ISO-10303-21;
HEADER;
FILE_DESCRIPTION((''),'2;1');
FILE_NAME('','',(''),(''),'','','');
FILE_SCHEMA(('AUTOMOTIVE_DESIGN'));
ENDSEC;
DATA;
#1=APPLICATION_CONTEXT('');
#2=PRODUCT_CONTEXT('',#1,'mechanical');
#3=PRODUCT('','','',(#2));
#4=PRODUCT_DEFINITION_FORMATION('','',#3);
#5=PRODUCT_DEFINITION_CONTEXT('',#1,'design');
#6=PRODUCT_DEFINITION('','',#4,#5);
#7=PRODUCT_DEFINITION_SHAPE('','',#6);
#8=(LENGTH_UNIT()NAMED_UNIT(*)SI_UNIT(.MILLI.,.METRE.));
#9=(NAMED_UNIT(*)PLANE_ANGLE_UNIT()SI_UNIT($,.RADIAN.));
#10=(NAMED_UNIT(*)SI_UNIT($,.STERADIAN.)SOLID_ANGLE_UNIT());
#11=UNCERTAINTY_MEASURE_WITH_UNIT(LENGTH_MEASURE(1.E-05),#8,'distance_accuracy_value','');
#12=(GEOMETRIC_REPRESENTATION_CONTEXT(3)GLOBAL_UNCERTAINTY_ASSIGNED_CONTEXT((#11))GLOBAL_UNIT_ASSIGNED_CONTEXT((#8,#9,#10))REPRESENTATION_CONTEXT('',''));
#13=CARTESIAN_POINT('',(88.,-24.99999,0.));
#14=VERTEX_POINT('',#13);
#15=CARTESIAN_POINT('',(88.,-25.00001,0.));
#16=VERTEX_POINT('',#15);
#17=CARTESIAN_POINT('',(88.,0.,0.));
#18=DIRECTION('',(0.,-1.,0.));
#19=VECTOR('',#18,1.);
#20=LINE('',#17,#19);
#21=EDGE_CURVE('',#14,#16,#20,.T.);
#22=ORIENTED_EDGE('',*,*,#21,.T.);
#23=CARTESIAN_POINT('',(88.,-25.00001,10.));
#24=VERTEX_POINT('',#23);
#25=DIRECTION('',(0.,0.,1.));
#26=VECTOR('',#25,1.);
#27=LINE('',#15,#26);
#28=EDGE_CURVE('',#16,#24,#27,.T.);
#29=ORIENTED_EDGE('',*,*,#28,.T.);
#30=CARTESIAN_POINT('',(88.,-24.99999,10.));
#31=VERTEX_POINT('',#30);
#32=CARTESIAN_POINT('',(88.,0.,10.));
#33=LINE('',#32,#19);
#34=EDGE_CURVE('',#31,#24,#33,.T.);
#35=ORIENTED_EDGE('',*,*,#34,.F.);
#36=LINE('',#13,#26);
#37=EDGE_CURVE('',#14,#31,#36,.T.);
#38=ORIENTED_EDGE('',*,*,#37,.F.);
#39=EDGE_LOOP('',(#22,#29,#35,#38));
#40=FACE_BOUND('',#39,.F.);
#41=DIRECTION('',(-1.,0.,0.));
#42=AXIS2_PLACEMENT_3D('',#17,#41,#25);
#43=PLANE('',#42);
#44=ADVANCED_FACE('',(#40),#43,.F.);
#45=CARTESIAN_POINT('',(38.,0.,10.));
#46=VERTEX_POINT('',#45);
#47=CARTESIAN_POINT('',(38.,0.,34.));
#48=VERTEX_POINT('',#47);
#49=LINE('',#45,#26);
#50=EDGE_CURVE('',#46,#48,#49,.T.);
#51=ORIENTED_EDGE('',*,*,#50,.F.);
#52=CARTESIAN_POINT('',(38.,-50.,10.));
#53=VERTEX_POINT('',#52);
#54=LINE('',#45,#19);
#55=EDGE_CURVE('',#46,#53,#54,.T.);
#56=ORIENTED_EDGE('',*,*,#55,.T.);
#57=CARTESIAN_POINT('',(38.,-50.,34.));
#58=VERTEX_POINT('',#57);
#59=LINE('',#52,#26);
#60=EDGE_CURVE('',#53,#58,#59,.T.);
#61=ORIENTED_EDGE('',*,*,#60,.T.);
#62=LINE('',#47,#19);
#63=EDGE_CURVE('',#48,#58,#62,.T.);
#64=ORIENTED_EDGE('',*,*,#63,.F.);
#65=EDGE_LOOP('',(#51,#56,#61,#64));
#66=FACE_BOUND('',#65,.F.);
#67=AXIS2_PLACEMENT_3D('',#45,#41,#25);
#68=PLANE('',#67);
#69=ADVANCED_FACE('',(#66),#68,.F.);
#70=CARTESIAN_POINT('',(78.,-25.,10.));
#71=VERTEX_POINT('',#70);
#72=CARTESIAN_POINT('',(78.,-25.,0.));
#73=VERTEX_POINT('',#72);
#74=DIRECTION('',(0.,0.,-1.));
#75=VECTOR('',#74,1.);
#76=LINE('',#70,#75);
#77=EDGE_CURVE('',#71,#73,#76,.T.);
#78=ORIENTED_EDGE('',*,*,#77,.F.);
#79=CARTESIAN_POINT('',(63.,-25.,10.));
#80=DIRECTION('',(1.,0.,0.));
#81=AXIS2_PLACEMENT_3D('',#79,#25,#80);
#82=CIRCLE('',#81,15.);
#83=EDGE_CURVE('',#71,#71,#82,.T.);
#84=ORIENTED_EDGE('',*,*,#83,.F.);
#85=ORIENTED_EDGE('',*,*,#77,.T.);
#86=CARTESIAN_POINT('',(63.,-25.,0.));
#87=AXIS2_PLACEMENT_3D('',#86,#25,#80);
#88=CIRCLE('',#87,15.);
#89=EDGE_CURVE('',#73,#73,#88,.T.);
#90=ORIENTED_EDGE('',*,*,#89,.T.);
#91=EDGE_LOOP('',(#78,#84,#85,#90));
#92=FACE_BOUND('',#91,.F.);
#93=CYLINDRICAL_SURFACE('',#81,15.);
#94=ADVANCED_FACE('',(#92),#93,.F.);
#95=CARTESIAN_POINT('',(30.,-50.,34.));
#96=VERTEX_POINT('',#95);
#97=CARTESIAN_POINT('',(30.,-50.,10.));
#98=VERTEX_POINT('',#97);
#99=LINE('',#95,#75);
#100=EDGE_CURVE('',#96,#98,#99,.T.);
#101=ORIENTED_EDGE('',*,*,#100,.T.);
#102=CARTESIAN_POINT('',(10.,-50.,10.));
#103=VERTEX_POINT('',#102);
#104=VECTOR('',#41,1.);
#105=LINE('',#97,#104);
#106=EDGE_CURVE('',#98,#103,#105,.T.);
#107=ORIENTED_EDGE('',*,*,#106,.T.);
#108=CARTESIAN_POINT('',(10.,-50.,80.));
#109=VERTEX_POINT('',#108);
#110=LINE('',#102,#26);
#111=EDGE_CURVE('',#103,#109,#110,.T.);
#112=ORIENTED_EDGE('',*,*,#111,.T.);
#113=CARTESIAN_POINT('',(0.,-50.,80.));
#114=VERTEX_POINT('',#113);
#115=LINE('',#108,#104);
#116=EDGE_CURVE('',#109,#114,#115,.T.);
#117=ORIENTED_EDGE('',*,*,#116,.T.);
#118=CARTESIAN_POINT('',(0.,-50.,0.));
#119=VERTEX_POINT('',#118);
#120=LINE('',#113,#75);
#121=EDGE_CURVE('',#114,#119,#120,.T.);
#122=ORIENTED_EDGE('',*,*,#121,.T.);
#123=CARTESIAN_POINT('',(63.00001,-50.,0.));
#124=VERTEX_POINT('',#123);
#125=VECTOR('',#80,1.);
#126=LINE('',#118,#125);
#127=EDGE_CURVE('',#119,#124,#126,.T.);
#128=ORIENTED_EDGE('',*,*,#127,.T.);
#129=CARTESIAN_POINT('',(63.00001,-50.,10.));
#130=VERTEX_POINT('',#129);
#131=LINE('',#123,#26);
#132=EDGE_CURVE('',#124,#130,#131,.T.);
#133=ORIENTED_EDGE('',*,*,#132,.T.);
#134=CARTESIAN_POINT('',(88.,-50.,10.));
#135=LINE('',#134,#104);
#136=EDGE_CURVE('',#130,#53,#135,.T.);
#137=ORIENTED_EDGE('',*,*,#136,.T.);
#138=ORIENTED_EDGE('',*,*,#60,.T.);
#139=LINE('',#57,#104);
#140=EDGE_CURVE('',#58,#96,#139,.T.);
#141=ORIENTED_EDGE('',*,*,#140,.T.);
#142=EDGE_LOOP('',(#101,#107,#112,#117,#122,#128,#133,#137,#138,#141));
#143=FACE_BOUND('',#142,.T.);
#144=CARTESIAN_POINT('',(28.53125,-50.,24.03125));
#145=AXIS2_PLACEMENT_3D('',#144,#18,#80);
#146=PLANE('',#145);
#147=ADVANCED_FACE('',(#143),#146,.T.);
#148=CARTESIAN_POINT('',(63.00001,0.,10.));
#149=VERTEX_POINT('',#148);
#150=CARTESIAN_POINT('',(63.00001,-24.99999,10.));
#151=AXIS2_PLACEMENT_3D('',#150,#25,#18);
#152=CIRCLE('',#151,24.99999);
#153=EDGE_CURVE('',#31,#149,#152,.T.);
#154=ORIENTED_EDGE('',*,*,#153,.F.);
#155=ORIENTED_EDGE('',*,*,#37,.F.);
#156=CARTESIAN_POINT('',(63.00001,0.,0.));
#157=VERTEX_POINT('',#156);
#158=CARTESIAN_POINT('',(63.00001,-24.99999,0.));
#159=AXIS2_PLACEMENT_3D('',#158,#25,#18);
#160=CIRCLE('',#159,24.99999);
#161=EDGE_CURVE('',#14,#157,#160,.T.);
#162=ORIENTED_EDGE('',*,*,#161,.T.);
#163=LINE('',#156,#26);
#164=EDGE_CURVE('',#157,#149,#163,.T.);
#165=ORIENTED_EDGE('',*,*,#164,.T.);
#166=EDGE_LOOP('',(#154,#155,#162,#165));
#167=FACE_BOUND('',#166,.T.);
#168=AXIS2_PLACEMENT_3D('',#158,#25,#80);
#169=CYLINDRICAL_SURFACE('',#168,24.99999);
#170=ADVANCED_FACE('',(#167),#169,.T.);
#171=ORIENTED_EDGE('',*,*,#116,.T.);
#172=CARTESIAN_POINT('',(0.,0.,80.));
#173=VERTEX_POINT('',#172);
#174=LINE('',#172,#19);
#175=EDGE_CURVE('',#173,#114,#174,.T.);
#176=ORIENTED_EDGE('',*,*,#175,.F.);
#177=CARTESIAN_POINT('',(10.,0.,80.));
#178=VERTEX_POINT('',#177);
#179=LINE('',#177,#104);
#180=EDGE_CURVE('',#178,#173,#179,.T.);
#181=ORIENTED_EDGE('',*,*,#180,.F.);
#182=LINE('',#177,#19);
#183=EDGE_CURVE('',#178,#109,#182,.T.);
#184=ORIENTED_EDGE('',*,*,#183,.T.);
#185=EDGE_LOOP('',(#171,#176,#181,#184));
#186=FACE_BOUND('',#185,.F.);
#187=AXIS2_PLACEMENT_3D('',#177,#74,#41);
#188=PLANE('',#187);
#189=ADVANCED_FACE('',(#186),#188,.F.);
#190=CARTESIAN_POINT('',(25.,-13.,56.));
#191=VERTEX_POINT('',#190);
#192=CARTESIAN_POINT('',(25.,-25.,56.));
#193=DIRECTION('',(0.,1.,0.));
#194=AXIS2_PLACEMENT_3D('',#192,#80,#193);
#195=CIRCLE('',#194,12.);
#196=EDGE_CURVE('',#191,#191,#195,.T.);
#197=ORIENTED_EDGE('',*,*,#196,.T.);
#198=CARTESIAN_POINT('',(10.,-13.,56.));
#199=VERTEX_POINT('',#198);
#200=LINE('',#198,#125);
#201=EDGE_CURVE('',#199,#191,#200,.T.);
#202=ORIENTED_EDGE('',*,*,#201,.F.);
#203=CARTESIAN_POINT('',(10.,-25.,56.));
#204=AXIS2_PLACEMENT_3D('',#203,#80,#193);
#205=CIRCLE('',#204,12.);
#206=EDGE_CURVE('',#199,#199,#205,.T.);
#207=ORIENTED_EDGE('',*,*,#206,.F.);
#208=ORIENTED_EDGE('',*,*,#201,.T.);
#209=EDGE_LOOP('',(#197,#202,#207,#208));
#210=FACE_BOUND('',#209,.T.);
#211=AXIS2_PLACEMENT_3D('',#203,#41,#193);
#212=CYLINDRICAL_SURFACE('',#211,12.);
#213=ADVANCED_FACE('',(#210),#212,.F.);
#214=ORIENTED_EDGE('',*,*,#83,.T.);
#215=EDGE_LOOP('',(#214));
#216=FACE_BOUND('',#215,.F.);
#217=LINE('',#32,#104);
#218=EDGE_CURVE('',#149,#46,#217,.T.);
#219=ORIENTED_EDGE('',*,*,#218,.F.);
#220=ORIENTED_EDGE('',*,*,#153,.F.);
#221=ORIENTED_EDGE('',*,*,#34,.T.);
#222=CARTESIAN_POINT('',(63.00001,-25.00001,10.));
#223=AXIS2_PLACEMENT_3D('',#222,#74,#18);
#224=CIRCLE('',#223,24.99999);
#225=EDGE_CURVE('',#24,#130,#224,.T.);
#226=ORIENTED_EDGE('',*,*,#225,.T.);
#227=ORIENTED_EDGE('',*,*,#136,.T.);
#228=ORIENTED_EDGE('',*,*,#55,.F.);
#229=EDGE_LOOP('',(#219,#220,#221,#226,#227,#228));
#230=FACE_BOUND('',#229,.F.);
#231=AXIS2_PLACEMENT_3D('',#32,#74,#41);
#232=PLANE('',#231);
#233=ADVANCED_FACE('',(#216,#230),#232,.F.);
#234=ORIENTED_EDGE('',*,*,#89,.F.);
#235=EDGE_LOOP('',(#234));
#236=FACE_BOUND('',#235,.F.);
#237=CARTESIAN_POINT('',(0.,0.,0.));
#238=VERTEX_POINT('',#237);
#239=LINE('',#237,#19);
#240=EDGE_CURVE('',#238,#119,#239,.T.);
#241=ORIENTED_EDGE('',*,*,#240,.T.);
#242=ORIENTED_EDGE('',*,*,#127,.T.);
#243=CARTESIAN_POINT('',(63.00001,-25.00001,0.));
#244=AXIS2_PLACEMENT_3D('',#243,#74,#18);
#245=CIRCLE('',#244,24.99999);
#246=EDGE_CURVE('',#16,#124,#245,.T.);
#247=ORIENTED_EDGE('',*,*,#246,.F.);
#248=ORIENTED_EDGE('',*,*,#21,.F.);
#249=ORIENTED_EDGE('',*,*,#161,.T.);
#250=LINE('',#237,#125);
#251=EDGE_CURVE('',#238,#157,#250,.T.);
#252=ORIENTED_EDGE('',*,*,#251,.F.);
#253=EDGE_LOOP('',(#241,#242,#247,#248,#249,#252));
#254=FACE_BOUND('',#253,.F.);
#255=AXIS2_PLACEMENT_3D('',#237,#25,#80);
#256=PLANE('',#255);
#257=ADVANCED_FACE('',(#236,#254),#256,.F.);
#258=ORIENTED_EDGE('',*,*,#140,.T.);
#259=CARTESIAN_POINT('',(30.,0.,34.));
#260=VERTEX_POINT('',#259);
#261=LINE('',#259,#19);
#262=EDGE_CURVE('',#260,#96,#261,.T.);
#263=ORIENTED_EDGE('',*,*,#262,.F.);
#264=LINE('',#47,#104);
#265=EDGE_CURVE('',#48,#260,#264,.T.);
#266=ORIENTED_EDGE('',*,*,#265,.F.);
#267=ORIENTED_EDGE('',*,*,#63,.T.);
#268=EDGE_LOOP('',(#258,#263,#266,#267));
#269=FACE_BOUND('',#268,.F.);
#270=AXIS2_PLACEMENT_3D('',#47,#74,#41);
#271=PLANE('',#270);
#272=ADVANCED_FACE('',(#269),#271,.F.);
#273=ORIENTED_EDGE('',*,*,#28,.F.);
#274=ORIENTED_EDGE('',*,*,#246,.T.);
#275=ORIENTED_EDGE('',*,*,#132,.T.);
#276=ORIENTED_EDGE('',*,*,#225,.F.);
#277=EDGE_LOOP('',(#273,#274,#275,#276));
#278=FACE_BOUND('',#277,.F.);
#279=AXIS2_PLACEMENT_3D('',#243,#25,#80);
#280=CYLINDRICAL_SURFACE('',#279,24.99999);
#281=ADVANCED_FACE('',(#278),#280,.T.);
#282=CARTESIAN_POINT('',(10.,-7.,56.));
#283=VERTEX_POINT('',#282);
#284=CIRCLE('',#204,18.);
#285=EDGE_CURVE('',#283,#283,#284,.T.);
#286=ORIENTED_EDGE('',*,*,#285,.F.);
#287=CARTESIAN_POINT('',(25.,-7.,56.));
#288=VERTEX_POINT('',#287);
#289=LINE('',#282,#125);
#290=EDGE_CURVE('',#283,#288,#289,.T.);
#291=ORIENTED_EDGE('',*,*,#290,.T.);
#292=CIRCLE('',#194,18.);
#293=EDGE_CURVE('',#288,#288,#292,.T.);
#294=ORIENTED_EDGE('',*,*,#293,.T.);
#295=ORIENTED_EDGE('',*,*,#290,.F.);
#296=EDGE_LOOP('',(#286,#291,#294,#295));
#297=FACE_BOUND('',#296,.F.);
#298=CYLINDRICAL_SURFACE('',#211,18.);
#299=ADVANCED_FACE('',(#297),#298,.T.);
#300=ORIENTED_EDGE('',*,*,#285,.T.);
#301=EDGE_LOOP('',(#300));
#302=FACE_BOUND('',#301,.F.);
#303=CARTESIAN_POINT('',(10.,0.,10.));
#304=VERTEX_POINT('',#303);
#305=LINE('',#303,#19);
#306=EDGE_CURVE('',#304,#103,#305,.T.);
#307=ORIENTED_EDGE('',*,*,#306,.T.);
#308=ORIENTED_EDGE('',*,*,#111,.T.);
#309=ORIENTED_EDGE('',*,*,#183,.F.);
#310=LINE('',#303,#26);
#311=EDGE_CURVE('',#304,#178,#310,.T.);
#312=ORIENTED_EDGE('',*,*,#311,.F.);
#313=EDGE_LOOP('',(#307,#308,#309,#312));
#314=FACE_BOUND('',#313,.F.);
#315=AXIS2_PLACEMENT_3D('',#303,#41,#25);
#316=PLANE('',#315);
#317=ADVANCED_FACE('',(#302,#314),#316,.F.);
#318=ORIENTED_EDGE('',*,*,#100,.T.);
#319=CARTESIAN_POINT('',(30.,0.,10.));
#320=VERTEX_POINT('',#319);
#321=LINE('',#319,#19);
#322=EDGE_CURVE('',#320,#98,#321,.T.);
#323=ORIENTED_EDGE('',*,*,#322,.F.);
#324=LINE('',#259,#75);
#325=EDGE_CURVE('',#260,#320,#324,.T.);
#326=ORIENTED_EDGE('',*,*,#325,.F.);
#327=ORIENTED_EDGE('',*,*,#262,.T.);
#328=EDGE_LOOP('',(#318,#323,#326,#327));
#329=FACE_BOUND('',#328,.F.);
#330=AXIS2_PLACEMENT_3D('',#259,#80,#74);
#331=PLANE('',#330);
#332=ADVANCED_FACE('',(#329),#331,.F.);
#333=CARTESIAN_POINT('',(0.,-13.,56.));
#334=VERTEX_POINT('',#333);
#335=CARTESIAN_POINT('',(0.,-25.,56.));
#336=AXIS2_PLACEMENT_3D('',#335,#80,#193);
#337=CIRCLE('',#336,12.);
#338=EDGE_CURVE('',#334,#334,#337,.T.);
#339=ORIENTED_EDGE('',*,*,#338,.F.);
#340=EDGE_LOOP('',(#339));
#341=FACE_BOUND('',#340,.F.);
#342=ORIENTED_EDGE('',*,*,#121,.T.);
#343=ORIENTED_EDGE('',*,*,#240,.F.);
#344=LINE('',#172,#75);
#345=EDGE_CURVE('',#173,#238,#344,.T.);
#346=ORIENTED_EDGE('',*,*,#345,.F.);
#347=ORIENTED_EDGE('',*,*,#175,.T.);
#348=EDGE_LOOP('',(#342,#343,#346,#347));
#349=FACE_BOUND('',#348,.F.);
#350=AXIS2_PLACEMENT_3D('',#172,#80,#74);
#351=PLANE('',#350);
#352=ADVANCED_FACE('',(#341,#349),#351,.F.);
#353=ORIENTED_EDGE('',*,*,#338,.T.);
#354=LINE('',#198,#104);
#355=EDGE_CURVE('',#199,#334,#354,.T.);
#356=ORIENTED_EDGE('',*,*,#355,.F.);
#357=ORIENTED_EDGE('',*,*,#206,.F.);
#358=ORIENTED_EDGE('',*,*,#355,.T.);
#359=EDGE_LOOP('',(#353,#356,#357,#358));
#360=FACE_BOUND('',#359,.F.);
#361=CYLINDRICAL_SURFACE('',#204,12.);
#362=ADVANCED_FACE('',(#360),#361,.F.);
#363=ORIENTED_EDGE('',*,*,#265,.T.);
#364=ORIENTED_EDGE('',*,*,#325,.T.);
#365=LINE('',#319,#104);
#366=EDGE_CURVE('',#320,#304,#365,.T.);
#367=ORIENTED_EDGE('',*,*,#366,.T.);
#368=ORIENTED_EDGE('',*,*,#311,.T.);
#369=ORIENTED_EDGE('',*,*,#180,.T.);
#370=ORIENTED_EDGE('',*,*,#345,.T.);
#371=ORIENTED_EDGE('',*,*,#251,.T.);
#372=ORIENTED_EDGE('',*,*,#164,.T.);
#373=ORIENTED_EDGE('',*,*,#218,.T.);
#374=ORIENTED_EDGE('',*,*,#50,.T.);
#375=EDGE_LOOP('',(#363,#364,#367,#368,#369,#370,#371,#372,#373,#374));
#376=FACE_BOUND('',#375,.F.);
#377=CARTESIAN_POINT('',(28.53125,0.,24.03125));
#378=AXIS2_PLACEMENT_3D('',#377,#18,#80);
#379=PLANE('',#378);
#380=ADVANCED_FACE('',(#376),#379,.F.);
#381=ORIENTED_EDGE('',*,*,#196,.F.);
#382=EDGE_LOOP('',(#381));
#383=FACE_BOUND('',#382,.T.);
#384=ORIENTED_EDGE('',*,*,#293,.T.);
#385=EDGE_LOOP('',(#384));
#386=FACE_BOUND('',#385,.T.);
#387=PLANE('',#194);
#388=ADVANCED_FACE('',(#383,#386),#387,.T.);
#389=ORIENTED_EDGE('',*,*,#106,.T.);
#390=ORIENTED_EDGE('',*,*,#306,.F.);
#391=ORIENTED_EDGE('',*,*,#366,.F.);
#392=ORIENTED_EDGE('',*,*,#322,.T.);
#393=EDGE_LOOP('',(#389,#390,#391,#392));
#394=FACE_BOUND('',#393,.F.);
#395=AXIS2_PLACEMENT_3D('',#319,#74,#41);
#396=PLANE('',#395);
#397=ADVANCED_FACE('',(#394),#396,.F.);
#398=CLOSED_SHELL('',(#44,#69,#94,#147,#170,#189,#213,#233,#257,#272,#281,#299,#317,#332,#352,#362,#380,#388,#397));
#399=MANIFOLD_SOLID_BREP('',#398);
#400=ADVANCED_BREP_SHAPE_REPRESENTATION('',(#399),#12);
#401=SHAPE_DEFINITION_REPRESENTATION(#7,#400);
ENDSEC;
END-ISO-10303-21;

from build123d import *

# Parameters (mm, degrees)
F1_DEPTH = 50
F2_R     = 24.99999
F3_R     = 15
F4_DEPTH = 10
F5_R     = 18
F5_R_2   = 12
F6_DEPTH = 15
F7_DEPTH = 10


# Not quite as in the source:
# - a fillet or chamfer is up to 0.001 mm smaller than in the source, because OpenCascade refuses the exact size


with BuildPart() as f1:
    # F0 (on Front) → F1 (new body)
    with BuildSketch(Plane.XZ):
        Polygon((0, 80), (0, 0), (88, 0), (88, 10), (38, 10), (38, 34), (30, 34), (30, 10), (10, 10), (10, 80), align=None)
    extrude(amount=F1_DEPTH)

    # F2 (radius 25 in the source; OpenCascade refuses exactly that, so slightly less here)
    f2_edges = [f1.edges().sort_by_distance(p)[0] for p in [
        (88, -50, 5),
        (88, 0, 5),
    ]]
    fillet(f2_edges, radius=F2_R)

    # F3 (on face) → F4 (cut, through all)
    with BuildSketch(Plane.XY.offset(10)):
        with Locations((63, -25)):
            Circle(F3_R)
    extrude(amount=-F4_DEPTH, mode=Mode.SUBTRACT)

    # F5 (on face) → F6 (join)
    with BuildSketch(Plane.YZ.offset(10)):
        with Locations((-25, 56)):
            Circle(F5_R)
        with Locations((-25, 56)):
            Circle(F5_R_2, mode=Mode.SUBTRACT)
    extrude(amount=F6_DEPTH)

    # F7 (cut, through all): a face of the model
    f7_faces = [f1.faces().sort_by_distance(p)[0] for p in [
        (10, -25, 56),
    ]]
    extrude(f7_faces, amount=-F7_DEPTH, mode=Mode.SUBTRACT)


solid = f1.part
